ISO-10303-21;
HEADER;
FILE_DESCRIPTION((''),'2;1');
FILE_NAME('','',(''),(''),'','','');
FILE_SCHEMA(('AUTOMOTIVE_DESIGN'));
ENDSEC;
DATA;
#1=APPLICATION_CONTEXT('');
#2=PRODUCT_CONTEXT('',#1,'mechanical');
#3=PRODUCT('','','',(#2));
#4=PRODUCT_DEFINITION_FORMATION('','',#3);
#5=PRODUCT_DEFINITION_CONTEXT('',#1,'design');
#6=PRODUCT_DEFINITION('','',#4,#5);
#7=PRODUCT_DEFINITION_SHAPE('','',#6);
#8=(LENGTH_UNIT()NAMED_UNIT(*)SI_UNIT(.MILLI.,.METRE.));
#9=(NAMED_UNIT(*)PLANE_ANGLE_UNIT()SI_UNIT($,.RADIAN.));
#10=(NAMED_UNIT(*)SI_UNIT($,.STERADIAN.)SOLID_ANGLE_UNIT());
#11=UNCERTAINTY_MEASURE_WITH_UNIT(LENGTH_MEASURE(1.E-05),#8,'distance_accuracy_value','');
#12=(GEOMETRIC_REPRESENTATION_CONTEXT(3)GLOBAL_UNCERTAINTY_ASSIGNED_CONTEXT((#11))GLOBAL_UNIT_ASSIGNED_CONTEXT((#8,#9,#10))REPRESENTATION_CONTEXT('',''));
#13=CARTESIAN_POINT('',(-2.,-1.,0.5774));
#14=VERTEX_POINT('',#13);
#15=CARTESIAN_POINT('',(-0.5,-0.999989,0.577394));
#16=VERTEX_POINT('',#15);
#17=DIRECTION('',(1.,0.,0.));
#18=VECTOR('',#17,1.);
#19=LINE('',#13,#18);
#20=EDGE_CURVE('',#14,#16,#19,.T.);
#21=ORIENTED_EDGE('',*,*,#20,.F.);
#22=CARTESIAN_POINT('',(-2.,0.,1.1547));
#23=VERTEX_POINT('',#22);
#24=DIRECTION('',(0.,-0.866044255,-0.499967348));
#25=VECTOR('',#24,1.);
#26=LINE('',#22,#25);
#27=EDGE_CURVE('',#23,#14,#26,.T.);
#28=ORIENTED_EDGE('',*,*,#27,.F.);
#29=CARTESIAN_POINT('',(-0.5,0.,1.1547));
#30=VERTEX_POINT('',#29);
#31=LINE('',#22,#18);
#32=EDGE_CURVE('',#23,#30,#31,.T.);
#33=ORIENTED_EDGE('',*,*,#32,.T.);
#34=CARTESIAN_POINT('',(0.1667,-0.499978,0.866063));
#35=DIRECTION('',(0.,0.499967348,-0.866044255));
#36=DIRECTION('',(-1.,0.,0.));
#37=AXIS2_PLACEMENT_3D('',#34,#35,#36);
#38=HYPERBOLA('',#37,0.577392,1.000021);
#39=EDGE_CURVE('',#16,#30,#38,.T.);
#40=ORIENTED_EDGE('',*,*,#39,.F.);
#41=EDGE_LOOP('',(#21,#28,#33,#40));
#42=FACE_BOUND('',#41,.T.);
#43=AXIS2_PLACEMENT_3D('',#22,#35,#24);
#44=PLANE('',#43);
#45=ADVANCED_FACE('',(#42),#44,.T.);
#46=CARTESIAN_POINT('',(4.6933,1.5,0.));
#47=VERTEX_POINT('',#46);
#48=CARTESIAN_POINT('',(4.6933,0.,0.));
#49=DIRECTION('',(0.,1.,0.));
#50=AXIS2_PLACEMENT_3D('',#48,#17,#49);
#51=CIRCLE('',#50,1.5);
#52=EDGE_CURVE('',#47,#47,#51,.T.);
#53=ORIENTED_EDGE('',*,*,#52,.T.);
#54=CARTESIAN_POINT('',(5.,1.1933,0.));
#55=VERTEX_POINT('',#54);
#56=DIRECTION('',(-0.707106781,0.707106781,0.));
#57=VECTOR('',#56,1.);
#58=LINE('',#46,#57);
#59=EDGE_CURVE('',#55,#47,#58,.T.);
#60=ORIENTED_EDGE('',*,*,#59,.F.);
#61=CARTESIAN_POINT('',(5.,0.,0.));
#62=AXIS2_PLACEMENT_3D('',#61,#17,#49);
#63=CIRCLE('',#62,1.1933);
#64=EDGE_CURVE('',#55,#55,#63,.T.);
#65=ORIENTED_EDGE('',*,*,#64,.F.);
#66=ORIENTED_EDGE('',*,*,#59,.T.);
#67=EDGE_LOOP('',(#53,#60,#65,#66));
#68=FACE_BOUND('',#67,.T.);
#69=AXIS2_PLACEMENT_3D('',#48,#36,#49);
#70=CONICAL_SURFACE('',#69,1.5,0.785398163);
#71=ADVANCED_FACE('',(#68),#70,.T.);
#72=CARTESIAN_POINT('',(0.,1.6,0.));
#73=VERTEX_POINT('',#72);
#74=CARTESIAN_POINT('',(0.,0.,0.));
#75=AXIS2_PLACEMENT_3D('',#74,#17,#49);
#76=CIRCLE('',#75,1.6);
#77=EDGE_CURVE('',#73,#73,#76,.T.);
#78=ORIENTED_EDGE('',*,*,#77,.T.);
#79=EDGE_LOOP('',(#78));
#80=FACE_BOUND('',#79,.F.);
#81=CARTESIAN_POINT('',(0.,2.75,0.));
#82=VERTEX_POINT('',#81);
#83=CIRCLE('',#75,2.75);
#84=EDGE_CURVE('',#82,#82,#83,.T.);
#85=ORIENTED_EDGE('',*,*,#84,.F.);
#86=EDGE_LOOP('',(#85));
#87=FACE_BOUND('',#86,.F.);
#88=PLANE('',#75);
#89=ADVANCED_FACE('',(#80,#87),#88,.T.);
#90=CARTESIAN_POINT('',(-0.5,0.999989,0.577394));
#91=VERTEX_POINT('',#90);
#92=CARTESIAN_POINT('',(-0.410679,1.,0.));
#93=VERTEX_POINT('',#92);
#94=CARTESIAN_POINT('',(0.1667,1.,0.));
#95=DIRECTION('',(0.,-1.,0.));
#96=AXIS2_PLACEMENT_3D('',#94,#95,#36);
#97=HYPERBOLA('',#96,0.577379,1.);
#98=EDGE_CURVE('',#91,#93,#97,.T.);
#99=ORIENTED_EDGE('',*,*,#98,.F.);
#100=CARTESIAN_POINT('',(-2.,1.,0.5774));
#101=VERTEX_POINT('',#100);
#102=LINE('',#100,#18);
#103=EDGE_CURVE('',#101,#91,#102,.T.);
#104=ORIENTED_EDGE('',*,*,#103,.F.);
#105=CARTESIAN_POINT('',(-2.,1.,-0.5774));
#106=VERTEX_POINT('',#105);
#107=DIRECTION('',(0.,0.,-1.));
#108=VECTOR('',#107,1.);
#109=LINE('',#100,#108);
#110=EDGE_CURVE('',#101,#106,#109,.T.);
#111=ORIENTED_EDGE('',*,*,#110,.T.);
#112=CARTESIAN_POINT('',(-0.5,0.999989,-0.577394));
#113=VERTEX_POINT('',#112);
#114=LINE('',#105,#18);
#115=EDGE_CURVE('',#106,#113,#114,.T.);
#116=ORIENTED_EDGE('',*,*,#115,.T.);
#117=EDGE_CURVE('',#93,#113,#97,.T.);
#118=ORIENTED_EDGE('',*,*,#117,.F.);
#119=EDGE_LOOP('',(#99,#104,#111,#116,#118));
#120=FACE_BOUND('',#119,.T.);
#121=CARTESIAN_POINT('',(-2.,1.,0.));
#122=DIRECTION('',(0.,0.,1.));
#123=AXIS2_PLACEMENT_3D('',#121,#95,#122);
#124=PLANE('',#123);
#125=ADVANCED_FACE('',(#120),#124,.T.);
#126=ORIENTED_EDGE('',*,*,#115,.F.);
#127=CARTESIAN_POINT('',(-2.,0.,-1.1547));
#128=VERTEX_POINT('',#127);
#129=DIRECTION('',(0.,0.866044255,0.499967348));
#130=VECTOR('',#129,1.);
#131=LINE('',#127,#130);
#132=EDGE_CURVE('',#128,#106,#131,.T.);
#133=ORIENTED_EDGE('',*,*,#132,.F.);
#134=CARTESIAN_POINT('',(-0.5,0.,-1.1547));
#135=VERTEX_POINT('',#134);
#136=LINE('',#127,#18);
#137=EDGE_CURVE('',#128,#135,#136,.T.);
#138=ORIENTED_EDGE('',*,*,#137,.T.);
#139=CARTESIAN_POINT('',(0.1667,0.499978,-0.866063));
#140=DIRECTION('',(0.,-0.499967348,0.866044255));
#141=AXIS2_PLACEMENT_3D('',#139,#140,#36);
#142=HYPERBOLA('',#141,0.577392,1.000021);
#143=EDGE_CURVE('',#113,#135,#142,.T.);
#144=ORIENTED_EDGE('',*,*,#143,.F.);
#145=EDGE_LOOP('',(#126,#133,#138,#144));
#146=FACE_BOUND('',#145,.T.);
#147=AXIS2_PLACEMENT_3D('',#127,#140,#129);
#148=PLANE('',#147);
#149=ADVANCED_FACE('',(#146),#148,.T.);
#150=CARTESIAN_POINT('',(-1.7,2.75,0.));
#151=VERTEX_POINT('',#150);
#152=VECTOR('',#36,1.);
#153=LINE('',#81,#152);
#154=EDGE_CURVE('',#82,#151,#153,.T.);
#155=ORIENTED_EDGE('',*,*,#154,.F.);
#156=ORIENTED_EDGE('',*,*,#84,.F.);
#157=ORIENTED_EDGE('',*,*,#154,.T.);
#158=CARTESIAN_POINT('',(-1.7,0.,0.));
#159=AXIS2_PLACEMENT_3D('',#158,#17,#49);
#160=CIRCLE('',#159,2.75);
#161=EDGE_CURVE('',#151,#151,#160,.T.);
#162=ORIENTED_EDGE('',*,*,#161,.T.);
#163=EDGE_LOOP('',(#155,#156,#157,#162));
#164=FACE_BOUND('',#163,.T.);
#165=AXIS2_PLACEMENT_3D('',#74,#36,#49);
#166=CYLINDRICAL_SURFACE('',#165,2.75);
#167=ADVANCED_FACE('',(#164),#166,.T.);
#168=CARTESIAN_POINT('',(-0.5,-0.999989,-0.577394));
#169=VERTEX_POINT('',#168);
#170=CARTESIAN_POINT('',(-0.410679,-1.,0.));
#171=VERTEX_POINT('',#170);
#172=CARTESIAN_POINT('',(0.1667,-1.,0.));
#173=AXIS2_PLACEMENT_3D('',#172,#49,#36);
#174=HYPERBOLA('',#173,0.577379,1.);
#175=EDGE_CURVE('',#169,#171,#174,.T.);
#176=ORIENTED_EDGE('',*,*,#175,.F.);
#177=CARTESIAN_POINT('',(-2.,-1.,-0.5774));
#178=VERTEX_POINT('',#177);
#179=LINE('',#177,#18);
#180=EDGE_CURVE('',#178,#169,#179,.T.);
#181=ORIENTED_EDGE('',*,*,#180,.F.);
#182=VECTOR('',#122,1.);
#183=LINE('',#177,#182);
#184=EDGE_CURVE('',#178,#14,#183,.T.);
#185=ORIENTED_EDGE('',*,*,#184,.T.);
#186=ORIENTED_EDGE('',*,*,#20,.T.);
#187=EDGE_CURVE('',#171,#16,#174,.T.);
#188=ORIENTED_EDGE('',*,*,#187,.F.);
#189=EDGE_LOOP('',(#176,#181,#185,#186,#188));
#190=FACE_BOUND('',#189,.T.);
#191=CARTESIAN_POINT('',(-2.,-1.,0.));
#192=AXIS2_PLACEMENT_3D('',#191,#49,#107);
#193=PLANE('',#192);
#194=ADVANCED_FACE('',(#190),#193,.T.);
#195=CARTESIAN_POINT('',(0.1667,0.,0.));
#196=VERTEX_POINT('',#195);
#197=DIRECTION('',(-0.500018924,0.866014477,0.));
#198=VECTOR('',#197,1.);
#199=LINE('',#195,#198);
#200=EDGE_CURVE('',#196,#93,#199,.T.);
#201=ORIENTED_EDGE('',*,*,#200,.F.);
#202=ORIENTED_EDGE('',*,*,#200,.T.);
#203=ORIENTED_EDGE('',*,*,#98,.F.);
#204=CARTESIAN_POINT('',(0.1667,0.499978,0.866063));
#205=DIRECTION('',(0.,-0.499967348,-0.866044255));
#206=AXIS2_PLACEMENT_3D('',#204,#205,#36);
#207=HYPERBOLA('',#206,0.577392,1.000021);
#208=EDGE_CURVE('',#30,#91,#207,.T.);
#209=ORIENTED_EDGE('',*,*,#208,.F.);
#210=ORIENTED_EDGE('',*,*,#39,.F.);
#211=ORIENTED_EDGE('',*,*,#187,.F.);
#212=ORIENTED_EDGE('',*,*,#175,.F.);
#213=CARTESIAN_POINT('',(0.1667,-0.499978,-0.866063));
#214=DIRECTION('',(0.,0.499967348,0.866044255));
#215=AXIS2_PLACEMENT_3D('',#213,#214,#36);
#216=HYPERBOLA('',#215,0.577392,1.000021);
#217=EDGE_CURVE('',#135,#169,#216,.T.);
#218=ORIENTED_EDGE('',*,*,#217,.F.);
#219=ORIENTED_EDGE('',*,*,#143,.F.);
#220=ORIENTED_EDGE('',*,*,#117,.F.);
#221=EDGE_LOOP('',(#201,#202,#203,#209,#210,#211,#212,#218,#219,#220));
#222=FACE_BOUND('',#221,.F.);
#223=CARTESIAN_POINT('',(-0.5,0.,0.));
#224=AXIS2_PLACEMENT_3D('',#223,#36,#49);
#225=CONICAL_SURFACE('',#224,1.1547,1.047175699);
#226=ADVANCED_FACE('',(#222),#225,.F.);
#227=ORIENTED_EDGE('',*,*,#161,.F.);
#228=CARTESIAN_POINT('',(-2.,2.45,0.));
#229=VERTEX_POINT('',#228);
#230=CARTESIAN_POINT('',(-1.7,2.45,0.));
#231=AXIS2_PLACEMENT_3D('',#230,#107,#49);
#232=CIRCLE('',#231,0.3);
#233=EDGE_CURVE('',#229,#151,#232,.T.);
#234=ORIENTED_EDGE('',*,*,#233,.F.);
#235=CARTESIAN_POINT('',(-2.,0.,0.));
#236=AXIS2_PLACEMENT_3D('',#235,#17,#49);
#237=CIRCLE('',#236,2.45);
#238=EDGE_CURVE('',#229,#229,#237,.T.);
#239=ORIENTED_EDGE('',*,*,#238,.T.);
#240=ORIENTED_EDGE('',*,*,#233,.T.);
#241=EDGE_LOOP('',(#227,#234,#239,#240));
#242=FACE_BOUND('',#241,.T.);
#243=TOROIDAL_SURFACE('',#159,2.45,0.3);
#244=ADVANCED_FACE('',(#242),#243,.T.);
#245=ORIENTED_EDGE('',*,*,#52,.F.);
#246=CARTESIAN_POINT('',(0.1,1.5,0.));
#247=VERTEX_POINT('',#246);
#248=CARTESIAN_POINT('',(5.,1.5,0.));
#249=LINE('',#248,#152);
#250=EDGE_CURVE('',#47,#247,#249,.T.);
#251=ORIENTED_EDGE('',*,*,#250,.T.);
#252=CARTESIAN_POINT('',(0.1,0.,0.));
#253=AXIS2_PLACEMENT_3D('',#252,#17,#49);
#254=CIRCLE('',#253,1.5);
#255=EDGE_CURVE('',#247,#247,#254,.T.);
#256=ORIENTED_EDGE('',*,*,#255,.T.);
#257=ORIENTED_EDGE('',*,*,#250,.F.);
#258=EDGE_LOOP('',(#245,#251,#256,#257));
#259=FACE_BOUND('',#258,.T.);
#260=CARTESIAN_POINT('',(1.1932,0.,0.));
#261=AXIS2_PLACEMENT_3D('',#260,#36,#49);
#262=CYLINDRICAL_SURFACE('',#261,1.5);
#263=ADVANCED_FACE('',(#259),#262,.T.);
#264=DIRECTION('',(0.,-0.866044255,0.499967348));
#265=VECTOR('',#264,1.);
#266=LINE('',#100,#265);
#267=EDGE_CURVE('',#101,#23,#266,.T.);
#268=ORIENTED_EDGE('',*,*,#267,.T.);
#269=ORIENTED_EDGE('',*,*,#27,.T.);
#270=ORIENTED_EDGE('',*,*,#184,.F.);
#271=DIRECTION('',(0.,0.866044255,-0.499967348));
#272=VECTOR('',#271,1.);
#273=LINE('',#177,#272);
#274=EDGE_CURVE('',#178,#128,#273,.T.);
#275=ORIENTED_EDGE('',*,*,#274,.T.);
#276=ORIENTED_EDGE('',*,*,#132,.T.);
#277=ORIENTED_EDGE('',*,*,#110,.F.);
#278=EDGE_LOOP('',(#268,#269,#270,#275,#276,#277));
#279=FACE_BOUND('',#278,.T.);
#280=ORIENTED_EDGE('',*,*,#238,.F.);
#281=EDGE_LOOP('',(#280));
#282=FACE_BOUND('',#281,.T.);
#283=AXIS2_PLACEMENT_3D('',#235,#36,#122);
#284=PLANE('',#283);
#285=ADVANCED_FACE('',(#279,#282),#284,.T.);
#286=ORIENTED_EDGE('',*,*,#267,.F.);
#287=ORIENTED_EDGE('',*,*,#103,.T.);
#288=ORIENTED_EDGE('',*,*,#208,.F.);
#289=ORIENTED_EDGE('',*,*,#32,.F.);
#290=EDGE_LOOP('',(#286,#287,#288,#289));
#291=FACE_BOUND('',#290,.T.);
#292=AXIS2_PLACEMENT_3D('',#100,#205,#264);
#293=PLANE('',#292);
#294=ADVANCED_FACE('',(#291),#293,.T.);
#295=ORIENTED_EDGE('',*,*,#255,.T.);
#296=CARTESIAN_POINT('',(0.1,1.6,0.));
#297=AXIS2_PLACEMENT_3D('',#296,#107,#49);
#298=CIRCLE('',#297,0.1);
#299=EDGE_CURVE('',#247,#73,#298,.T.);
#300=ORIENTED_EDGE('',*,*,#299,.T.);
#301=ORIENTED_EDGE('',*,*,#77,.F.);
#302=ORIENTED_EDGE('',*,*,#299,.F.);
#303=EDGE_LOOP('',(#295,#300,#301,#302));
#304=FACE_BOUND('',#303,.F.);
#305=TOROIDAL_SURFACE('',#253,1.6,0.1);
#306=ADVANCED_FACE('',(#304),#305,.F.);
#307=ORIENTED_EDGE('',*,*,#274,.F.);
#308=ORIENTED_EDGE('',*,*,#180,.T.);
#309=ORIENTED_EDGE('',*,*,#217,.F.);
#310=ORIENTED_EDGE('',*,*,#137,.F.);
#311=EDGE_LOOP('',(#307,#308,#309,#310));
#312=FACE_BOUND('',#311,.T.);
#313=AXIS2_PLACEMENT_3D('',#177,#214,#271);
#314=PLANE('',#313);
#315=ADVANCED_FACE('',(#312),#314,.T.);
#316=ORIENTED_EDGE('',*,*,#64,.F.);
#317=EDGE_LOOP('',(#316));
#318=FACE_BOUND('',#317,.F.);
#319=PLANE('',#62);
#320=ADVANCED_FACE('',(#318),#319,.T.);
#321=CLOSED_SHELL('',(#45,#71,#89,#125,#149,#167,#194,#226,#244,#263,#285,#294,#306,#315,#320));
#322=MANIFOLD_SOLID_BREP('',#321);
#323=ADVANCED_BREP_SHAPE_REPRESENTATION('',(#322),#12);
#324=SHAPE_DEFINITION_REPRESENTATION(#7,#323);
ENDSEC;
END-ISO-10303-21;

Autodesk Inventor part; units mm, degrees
ref_plane "YZ Plane" through (0, 0, 0) normal (1, 0, 0) x (0, 1, 0)
ref_plane "XZ Plane" through (0, 0, 0) normal (0, 1, 0) x (-1, 0, 0)
sketch "Skizze1" plane through (0, 0, 0) normal (0, 0, 1) x (1, 0, 0)
  line L0 (0.1667, 0) -> (5, 0)
  line L1 (5, 0) -> (5, 1.5)
  line L2 (5, 1.5) -> (1.5, 1.5)
  line L3 (1.5, 1.5) -> (1.1932, 1.5)
  line L4 (1.1932, 1.5) -> (0, 1.5)
  line L5 (0, 1.5) -> (0, 2.75)
  line L6 (0, 2.75) -> (-2, 2.75)
  line L7 (-2, 2.75) -> (-2, 1.1547)
  line L8 (-2, 1.1547) -> (-0.5, 1.1547)
  line L9 (-0.5, 1.1547) -> (0.1667, 0)
  line L10 (-3.4, 0) -> (6.4, 0) projected
  line L11 (0, -0.55) -> (0, 3.3) projected
  line L12 (1.5, 1.5) -> (0, 1.5) construction
  dimension "d1" = 3.5
  dimension "d2" = 0.3068
  dimension "d3" = 2
  dimension "d4" = 1.5
  dimension "d5" = 60
  dimension "d6" = 3
  dimension "d7" = 3
  dimension "d8" = 2.3094
  dimension "d9" = 5.5
  dimension "d26" = 5
revolve "Körper" add sketch "Skizze1" angle 360 about axis through (0.1667, 0, 0) along (1, 0, 0) contours L9 L11 L4 L3 L2 L1 L0 | L9 L8 L7 L6 L5 L11
sketch "Skizze2" plane through (-2, 0, 0) normal (-1, 0, 0) x (0, 0, 1)
  circle A0 centre (0, 0) radius 1.1547 projected
  line L0 (0, -3.85) -> (0, 3.85) projected
  line L1 (-3.85, 0) -> (3.85, 0) projected
  line L2 (1.1547, 0) -> (0.5774, -1)
  line L3 (0.5774, -1) -> (-0.5774, -1)
  line L4 (-0.5774, -1) -> (-1.1547, 0)
  line L5 (-1.1547, 0) -> (-0.5774, 1)
  line L6 (-0.5774, 1) -> (0.5774, 1)
  line L7 (0.5774, 1) -> (1.1547, 0)
extrude "Loch" add sketch "Skizze2" against normal up to next contours L7 A0 | A0 L2 | L6 L0 A0 | A0 L0 L3 | L0 L6 A0 | A0 L3 L0 | L4 A0 | A0 L5
fillet "Rundung1" radius 0.3 1 edges at (-2, -2.75, 0)
thread "Gewinde" size "M3x0.5" class "6g" standard "ISO Metric profile" length 3.5
chamfer "Fase1" distance 0.3067 distance2 0.3067 1 edges at (5, -1.5, 0) measured on face at (5, -0.2617, -0.7882)
ref_plane "Work Plane1" through (29, 0, 0) normal (0, -1, 0) x (1, 0, 0)
fillet "Fillet2" radius 0.1 1 edges at (0, -1.5, 0)
equation "\"d1\" = GEL"
equation "\"d3\" = KOH"
equation "\"d4\" = INTI"
equation "\"d6\" = GD"
equation "\"d7\" = BDM"
equation "\"d8\" = 1.1547 * SW"
equation "\"d9\" = KOD"
equation "\"d26\" = NLG"
equation "\"d30\" = R"
equation "\"d17\" = RR"
equation "\"d13\" = GEL"
equation "\"d15\" = -0.5 * SPD + 0.5 * GD"
equation "\"d16\" = GUL"
equation "\"GD\" = NND"
equation "\"NLG\" = 5"
equation "\"GEL\" = 3.5"
equation "\"KOD\" = 5.5"
equation "\"KOH\" = 2"
equation "\"INTI\" = 1.5"
equation "\"GAL\" = 0.61345 * PTC"
equation "\"GUL\" = 0.61345 * PTC"
equation "\"BDM\" = NND"
equation "\"SW\" = 2"
equation "\"RR\" = 0.3"
equation "\"SPD\" = NND - 1.2269 * PTC"
equation "\"R\" = 0.1"
equation "\"TOA\" = 30deg"
equation "\"GD1\" = THREADDIA - 1.2269 * PTC"
equation "\"THREADDIA\" = 3"
equation "\"FAWI\" = 45deg"
equation "\"ANG\" = 120deg"
equation "\"PTC\" = 0.5"
equation "\"NND\" = 3"
equation "\"E0\" = 1.155 * SW"
properties part number "DIN 7984 - M3 x 5" material "Stahl, weich"
